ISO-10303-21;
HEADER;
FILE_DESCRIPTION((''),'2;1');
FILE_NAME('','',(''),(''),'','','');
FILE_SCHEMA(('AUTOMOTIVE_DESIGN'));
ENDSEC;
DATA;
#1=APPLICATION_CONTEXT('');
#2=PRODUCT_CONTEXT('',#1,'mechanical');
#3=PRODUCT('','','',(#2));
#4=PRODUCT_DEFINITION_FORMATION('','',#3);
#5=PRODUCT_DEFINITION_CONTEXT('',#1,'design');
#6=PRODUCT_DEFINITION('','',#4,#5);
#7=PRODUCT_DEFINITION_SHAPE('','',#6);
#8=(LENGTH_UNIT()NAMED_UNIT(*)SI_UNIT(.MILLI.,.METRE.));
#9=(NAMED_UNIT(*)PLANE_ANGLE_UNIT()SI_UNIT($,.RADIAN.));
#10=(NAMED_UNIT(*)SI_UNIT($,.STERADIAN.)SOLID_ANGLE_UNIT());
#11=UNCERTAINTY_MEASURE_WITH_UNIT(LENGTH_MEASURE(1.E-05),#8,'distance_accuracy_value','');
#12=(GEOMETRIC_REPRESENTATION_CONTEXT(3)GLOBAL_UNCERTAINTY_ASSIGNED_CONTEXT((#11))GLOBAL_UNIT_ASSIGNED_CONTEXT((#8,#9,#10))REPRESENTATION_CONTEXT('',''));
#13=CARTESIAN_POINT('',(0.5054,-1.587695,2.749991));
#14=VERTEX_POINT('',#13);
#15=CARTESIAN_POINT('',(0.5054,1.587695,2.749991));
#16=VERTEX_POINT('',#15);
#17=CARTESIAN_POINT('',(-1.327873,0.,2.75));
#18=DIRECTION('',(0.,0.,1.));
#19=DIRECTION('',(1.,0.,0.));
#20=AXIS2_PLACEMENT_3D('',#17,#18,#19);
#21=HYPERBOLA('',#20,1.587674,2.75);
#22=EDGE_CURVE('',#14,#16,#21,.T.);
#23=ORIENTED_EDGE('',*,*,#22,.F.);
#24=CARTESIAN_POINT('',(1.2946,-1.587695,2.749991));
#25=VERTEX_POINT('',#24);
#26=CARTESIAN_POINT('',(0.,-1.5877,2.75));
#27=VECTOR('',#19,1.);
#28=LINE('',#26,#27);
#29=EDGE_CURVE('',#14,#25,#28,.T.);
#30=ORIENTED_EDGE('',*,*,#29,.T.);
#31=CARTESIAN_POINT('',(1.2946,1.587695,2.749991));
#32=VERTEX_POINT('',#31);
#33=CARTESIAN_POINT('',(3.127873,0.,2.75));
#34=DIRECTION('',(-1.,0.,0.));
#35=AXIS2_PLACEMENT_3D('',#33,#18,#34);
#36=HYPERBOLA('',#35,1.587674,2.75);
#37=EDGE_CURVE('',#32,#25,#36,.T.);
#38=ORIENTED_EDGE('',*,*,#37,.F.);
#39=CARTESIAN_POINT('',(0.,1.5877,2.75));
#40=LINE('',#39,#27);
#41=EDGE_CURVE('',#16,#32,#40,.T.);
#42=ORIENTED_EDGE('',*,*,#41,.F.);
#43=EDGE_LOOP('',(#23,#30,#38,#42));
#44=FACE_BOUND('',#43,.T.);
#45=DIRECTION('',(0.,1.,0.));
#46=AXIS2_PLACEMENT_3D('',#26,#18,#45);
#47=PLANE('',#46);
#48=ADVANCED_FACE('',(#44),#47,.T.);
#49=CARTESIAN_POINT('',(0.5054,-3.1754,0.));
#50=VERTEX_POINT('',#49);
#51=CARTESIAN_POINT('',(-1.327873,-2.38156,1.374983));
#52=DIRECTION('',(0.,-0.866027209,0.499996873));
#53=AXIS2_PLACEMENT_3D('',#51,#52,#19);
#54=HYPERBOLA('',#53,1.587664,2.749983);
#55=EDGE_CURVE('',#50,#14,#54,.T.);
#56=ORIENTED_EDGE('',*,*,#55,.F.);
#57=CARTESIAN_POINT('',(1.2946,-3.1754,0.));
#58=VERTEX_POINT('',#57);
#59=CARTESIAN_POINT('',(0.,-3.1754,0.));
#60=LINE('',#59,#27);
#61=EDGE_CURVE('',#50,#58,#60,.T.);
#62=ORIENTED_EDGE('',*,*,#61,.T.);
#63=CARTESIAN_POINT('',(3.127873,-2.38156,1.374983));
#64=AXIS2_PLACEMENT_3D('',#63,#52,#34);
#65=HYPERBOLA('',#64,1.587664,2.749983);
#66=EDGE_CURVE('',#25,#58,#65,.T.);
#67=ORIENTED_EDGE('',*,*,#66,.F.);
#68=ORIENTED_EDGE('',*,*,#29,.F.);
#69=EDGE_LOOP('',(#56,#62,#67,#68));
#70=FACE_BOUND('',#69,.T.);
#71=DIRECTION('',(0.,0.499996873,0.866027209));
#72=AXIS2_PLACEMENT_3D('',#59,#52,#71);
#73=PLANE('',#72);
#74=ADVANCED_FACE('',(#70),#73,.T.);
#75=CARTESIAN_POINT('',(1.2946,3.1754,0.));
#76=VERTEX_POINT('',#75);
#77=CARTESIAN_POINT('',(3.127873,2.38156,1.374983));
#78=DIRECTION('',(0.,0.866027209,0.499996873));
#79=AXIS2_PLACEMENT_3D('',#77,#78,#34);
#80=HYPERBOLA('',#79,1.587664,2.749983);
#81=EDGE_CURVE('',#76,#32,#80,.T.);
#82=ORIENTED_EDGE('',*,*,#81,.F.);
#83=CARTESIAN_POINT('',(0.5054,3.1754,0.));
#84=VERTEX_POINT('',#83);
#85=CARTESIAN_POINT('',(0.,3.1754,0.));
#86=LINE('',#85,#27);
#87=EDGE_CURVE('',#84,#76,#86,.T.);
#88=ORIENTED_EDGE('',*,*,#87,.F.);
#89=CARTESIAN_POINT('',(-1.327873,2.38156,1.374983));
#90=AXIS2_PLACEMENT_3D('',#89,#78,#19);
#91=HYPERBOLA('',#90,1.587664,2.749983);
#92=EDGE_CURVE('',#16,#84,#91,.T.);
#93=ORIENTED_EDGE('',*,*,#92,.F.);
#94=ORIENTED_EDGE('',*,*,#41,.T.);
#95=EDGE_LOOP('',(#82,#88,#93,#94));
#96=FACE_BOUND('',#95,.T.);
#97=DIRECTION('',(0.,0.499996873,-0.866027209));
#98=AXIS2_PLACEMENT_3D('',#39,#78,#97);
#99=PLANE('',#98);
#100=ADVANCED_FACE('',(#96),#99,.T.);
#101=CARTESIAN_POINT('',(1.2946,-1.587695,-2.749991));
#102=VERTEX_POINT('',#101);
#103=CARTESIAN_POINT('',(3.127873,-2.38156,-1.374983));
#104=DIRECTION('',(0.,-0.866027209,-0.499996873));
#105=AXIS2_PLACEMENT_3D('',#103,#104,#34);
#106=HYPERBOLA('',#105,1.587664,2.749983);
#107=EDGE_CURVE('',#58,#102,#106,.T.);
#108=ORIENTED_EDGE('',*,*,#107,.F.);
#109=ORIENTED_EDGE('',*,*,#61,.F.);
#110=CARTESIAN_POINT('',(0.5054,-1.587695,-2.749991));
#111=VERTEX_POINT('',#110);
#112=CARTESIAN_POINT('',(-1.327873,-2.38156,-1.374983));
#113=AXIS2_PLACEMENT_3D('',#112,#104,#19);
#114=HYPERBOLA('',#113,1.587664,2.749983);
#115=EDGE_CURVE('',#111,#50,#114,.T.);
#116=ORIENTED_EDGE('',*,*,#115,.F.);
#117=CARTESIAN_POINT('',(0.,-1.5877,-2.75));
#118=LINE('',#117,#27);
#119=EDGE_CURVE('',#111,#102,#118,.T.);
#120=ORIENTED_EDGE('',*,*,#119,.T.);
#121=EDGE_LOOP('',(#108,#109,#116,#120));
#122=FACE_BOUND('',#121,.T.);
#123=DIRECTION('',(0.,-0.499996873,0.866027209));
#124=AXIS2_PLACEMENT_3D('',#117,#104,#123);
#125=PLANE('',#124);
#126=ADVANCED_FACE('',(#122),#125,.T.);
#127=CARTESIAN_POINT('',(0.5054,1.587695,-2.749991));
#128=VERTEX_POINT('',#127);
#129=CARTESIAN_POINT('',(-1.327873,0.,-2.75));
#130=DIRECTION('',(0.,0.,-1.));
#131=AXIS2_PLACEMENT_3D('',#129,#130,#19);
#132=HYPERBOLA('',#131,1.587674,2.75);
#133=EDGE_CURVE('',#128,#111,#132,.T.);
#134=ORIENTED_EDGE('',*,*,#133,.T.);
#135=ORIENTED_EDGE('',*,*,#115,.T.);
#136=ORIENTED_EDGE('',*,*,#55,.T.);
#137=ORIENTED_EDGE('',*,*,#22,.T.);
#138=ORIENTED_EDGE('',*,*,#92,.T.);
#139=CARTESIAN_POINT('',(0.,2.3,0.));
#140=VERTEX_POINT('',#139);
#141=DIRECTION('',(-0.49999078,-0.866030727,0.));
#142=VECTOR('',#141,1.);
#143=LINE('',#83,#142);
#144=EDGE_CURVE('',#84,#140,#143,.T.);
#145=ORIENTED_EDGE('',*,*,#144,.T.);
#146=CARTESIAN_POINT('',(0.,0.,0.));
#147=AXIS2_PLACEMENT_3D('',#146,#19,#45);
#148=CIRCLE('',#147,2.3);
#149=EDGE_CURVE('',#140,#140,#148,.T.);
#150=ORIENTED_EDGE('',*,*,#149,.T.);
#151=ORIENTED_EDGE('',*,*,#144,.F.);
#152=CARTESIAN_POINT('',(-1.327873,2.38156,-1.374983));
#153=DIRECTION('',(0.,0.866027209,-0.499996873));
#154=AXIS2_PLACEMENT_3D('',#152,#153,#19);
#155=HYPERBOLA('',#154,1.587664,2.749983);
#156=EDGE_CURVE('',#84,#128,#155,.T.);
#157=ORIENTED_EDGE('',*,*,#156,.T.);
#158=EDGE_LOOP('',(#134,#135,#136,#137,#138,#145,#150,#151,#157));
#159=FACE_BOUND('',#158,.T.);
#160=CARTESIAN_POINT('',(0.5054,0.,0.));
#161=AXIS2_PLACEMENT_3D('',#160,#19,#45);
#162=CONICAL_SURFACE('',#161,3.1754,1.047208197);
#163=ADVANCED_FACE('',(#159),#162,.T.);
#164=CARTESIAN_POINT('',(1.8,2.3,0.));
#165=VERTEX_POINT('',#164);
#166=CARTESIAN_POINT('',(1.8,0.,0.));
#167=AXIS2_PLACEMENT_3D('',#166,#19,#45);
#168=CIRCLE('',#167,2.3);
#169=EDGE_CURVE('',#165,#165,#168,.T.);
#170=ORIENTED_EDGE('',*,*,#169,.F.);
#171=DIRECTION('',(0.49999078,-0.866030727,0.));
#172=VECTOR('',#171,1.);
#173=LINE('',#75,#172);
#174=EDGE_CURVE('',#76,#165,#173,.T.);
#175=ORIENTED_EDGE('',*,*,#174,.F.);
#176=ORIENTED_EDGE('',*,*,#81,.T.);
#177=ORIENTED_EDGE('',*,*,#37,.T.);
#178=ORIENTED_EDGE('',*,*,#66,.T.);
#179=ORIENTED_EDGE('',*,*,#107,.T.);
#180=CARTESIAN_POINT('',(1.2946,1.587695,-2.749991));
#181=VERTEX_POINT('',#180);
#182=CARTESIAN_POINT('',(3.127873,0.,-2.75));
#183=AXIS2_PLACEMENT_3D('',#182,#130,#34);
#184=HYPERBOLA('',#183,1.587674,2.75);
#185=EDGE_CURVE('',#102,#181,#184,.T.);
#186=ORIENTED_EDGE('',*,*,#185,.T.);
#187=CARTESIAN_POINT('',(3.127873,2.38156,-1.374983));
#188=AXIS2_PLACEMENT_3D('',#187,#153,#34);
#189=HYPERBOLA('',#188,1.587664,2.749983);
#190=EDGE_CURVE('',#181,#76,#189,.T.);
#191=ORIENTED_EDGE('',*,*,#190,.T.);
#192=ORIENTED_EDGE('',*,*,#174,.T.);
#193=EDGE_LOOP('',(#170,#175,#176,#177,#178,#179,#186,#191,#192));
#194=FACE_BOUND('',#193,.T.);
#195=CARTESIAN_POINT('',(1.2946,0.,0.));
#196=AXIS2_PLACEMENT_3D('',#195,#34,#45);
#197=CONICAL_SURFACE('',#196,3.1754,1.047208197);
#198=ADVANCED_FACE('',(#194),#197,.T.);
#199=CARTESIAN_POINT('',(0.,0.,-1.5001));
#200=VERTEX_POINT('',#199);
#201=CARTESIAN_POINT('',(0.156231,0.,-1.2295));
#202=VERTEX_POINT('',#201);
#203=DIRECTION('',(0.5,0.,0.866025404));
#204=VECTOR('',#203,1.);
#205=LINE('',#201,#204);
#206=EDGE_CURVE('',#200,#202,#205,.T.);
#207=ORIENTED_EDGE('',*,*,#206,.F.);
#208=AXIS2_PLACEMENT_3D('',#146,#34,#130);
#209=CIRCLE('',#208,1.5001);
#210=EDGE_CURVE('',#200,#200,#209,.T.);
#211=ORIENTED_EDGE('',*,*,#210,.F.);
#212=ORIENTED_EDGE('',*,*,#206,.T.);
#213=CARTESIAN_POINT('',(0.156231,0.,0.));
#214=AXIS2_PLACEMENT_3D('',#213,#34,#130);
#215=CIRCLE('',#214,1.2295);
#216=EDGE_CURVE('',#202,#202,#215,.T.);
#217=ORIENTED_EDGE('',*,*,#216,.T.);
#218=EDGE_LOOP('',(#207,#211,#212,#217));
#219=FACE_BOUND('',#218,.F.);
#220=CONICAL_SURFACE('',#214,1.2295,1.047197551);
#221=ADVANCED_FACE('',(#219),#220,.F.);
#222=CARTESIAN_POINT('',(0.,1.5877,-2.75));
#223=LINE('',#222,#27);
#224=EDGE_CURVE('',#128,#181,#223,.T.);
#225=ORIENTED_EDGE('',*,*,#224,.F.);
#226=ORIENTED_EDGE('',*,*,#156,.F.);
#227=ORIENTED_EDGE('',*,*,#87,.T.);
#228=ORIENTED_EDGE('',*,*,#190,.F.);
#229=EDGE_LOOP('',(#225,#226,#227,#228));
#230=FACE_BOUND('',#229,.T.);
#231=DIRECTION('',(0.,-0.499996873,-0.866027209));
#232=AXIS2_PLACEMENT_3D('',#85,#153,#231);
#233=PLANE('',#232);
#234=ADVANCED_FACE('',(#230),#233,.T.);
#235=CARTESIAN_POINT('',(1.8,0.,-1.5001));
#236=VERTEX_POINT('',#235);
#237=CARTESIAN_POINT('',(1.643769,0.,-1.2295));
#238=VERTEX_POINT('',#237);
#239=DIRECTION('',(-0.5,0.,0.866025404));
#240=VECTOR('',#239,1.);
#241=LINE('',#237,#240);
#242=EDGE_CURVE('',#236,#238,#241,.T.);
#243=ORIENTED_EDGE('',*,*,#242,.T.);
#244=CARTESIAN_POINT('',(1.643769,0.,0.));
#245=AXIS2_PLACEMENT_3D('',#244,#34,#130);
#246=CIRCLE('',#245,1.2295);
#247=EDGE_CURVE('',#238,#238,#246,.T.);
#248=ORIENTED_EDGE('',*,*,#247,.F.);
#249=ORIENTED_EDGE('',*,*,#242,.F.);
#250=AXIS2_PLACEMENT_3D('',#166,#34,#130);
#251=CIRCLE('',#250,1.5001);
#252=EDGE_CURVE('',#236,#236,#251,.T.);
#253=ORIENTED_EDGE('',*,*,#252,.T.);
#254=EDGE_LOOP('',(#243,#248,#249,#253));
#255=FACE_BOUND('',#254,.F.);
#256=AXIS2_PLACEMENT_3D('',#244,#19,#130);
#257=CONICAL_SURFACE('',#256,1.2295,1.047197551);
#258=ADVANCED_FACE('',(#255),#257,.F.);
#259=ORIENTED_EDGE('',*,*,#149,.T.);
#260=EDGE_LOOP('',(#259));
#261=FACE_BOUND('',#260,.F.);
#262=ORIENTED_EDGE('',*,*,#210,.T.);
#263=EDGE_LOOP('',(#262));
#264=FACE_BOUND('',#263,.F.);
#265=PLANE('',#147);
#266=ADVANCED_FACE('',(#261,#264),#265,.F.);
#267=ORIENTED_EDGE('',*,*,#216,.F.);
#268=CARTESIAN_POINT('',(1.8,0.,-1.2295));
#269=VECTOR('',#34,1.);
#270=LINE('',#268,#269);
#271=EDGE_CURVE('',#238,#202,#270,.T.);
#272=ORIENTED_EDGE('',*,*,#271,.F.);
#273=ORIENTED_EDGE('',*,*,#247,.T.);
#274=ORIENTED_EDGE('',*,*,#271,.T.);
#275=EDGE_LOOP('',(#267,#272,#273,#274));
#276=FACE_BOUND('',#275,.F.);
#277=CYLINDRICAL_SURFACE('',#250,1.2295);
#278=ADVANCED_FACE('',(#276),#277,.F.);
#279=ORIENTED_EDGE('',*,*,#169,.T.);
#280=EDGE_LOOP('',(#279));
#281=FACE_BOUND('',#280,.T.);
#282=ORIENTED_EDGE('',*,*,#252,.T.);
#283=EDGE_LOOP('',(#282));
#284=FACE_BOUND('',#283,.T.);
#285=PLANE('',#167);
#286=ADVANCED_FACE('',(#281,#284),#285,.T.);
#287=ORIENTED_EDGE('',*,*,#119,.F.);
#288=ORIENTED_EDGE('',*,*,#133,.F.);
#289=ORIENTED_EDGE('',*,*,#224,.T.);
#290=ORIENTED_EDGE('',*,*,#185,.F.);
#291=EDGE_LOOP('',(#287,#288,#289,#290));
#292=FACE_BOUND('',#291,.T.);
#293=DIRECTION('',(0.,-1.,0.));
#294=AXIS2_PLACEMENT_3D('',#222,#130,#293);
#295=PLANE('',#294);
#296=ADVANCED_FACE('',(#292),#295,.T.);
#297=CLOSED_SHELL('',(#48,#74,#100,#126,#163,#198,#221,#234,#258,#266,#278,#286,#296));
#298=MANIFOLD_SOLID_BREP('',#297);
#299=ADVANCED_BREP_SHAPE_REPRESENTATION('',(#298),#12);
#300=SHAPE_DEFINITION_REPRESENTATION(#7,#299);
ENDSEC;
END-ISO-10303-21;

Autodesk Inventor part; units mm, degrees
ref_plane "YZ Plane" through (0, 0, 0) normal (1, 0, 0) x (0, 1, 0)
ref_plane "XZ Plane" through (0, 0, 0) normal (0, 1, 0) x (-1, 0, 0)
sketch "Sketch1" plane through (0, 0, 0) normal (1, 0, 0) x (0, 1, 0)
  line L0 (-3.1754, 0) -> (-1.5877, 2.75)
  line L1 (-1.5877, 2.75) -> (1.5877, 2.75)
  line L2 (1.5877, 2.75) -> (3.1754, 0)
  line L3 (3.1754, 0) -> (1.5877, -2.75)
  line L4 (1.5877, -2.75) -> (-1.5877, -2.75)
  line L5 (-1.5877, -2.75) -> (-3.1754, 0)
  point P0 (0, 0)
  point P1 (0, 0)
  dimension "d0" = 6.3509
extrude "Body" add sketch "Sketch1" along normal blind 1.8
sketch "Sketch2" plane through (0, 0, 0) normal (0, 0, 1) x (1, 0, 0)
  line L0 (0, 1.5877) -> (0, 3.1754) projected
  line L1 (0, 3.1754) -> (1.8, 3.1754) projected
  line L2 (1.8, 1.5877) -> (1.8, 3.1754) projected
  line L3 (-0.36, 0) -> (2.16, 0) projected
  line L4 (0.5054, 3.1754) -> (0, 2.3)
  line L5 (1.2946, 3.1754) -> (1.8, 2.3)
  dimension "d3" = 30
  dimension "d4" = 30
  dimension "d5" = 4.6
  dimension "d6" = 4.6
revolve "Chamfer1" cut sketch "Sketch2" angle 360 about axis through (-10, 0, 0) along (1, 0, 0)
sketch "Sketch3" plane through (1.8, 0, 0) normal (1, 0, 0) x (0, 0, -1)
  arc A0 (-0.625, -1.0825) -> (0.625, -1.0825) centre (0, 0) ccw projected
hole "Thread" at (1.8, 0, 0) direction (-1, 0, 0) diameter 2.459 end through all thread size "M3x0.5" class "6H" standard "ISO Metric profile"
chamfer "Chamfer2" distance 0.2706 angle 30 1 edges at (1.8, 0, 1.2295) measured on face at (1.8, 1.9179, -0.2329)
chamfer "Chamfer3" distance 0.2706 angle 30 1 edges at (0, 0, 1.2295) measured on face at (0, 1.9179, -0.2329)
ref_plane "Work Plane1" through (-6.7921, 0, 0) normal (0, -0.8660254, -0.5) x (1, 0, 0)
equation "\"d0\" = 1.1547 * SW"
equation "\"d1\" = KOH"
equation "\"d8\" = -0.5 * GD1 + 0.5 * NND"
equation "\"d40\" = -0.5 * GD1 + 0.5 * NND"
equation "\"d10\" = -0.5 * GD1 + 0.5 * NND"
equation "\"d41\" = -0.5 * GD1 + 0.5 * NND"
equation "\"d3\" = ANG1"
equation "\"d4\" = ANG2"
equation "\"d5\" = SW0"
equation "\"d6\" = SW01"
equation "\"ANG1\" = 30deg"
equation "\"ANG2\" = 30deg"
equation "\"NND\" = 3"
equation "\"KOH\" = 1.8"
equation "\"SW\" = 5.5"
equation "\"SW0\" = 4.6"
equation "\"SW01\" = SW0"
equation "\"GUL\" = 0.541266 * PTC"
equation "\"THREADDIA\" = 3"
equation "\"TOA\" = 30deg"
equation "\"PTC\" = 0.5"
equation "\"E0\" = 1.155 * SW"
equation "\"GAL\" = 0.541266 * PTC"
equation "\"GD1\" = 2.458734"
properties part number "ISO 4035 - M3" material "Stainless Steel, 440C"
